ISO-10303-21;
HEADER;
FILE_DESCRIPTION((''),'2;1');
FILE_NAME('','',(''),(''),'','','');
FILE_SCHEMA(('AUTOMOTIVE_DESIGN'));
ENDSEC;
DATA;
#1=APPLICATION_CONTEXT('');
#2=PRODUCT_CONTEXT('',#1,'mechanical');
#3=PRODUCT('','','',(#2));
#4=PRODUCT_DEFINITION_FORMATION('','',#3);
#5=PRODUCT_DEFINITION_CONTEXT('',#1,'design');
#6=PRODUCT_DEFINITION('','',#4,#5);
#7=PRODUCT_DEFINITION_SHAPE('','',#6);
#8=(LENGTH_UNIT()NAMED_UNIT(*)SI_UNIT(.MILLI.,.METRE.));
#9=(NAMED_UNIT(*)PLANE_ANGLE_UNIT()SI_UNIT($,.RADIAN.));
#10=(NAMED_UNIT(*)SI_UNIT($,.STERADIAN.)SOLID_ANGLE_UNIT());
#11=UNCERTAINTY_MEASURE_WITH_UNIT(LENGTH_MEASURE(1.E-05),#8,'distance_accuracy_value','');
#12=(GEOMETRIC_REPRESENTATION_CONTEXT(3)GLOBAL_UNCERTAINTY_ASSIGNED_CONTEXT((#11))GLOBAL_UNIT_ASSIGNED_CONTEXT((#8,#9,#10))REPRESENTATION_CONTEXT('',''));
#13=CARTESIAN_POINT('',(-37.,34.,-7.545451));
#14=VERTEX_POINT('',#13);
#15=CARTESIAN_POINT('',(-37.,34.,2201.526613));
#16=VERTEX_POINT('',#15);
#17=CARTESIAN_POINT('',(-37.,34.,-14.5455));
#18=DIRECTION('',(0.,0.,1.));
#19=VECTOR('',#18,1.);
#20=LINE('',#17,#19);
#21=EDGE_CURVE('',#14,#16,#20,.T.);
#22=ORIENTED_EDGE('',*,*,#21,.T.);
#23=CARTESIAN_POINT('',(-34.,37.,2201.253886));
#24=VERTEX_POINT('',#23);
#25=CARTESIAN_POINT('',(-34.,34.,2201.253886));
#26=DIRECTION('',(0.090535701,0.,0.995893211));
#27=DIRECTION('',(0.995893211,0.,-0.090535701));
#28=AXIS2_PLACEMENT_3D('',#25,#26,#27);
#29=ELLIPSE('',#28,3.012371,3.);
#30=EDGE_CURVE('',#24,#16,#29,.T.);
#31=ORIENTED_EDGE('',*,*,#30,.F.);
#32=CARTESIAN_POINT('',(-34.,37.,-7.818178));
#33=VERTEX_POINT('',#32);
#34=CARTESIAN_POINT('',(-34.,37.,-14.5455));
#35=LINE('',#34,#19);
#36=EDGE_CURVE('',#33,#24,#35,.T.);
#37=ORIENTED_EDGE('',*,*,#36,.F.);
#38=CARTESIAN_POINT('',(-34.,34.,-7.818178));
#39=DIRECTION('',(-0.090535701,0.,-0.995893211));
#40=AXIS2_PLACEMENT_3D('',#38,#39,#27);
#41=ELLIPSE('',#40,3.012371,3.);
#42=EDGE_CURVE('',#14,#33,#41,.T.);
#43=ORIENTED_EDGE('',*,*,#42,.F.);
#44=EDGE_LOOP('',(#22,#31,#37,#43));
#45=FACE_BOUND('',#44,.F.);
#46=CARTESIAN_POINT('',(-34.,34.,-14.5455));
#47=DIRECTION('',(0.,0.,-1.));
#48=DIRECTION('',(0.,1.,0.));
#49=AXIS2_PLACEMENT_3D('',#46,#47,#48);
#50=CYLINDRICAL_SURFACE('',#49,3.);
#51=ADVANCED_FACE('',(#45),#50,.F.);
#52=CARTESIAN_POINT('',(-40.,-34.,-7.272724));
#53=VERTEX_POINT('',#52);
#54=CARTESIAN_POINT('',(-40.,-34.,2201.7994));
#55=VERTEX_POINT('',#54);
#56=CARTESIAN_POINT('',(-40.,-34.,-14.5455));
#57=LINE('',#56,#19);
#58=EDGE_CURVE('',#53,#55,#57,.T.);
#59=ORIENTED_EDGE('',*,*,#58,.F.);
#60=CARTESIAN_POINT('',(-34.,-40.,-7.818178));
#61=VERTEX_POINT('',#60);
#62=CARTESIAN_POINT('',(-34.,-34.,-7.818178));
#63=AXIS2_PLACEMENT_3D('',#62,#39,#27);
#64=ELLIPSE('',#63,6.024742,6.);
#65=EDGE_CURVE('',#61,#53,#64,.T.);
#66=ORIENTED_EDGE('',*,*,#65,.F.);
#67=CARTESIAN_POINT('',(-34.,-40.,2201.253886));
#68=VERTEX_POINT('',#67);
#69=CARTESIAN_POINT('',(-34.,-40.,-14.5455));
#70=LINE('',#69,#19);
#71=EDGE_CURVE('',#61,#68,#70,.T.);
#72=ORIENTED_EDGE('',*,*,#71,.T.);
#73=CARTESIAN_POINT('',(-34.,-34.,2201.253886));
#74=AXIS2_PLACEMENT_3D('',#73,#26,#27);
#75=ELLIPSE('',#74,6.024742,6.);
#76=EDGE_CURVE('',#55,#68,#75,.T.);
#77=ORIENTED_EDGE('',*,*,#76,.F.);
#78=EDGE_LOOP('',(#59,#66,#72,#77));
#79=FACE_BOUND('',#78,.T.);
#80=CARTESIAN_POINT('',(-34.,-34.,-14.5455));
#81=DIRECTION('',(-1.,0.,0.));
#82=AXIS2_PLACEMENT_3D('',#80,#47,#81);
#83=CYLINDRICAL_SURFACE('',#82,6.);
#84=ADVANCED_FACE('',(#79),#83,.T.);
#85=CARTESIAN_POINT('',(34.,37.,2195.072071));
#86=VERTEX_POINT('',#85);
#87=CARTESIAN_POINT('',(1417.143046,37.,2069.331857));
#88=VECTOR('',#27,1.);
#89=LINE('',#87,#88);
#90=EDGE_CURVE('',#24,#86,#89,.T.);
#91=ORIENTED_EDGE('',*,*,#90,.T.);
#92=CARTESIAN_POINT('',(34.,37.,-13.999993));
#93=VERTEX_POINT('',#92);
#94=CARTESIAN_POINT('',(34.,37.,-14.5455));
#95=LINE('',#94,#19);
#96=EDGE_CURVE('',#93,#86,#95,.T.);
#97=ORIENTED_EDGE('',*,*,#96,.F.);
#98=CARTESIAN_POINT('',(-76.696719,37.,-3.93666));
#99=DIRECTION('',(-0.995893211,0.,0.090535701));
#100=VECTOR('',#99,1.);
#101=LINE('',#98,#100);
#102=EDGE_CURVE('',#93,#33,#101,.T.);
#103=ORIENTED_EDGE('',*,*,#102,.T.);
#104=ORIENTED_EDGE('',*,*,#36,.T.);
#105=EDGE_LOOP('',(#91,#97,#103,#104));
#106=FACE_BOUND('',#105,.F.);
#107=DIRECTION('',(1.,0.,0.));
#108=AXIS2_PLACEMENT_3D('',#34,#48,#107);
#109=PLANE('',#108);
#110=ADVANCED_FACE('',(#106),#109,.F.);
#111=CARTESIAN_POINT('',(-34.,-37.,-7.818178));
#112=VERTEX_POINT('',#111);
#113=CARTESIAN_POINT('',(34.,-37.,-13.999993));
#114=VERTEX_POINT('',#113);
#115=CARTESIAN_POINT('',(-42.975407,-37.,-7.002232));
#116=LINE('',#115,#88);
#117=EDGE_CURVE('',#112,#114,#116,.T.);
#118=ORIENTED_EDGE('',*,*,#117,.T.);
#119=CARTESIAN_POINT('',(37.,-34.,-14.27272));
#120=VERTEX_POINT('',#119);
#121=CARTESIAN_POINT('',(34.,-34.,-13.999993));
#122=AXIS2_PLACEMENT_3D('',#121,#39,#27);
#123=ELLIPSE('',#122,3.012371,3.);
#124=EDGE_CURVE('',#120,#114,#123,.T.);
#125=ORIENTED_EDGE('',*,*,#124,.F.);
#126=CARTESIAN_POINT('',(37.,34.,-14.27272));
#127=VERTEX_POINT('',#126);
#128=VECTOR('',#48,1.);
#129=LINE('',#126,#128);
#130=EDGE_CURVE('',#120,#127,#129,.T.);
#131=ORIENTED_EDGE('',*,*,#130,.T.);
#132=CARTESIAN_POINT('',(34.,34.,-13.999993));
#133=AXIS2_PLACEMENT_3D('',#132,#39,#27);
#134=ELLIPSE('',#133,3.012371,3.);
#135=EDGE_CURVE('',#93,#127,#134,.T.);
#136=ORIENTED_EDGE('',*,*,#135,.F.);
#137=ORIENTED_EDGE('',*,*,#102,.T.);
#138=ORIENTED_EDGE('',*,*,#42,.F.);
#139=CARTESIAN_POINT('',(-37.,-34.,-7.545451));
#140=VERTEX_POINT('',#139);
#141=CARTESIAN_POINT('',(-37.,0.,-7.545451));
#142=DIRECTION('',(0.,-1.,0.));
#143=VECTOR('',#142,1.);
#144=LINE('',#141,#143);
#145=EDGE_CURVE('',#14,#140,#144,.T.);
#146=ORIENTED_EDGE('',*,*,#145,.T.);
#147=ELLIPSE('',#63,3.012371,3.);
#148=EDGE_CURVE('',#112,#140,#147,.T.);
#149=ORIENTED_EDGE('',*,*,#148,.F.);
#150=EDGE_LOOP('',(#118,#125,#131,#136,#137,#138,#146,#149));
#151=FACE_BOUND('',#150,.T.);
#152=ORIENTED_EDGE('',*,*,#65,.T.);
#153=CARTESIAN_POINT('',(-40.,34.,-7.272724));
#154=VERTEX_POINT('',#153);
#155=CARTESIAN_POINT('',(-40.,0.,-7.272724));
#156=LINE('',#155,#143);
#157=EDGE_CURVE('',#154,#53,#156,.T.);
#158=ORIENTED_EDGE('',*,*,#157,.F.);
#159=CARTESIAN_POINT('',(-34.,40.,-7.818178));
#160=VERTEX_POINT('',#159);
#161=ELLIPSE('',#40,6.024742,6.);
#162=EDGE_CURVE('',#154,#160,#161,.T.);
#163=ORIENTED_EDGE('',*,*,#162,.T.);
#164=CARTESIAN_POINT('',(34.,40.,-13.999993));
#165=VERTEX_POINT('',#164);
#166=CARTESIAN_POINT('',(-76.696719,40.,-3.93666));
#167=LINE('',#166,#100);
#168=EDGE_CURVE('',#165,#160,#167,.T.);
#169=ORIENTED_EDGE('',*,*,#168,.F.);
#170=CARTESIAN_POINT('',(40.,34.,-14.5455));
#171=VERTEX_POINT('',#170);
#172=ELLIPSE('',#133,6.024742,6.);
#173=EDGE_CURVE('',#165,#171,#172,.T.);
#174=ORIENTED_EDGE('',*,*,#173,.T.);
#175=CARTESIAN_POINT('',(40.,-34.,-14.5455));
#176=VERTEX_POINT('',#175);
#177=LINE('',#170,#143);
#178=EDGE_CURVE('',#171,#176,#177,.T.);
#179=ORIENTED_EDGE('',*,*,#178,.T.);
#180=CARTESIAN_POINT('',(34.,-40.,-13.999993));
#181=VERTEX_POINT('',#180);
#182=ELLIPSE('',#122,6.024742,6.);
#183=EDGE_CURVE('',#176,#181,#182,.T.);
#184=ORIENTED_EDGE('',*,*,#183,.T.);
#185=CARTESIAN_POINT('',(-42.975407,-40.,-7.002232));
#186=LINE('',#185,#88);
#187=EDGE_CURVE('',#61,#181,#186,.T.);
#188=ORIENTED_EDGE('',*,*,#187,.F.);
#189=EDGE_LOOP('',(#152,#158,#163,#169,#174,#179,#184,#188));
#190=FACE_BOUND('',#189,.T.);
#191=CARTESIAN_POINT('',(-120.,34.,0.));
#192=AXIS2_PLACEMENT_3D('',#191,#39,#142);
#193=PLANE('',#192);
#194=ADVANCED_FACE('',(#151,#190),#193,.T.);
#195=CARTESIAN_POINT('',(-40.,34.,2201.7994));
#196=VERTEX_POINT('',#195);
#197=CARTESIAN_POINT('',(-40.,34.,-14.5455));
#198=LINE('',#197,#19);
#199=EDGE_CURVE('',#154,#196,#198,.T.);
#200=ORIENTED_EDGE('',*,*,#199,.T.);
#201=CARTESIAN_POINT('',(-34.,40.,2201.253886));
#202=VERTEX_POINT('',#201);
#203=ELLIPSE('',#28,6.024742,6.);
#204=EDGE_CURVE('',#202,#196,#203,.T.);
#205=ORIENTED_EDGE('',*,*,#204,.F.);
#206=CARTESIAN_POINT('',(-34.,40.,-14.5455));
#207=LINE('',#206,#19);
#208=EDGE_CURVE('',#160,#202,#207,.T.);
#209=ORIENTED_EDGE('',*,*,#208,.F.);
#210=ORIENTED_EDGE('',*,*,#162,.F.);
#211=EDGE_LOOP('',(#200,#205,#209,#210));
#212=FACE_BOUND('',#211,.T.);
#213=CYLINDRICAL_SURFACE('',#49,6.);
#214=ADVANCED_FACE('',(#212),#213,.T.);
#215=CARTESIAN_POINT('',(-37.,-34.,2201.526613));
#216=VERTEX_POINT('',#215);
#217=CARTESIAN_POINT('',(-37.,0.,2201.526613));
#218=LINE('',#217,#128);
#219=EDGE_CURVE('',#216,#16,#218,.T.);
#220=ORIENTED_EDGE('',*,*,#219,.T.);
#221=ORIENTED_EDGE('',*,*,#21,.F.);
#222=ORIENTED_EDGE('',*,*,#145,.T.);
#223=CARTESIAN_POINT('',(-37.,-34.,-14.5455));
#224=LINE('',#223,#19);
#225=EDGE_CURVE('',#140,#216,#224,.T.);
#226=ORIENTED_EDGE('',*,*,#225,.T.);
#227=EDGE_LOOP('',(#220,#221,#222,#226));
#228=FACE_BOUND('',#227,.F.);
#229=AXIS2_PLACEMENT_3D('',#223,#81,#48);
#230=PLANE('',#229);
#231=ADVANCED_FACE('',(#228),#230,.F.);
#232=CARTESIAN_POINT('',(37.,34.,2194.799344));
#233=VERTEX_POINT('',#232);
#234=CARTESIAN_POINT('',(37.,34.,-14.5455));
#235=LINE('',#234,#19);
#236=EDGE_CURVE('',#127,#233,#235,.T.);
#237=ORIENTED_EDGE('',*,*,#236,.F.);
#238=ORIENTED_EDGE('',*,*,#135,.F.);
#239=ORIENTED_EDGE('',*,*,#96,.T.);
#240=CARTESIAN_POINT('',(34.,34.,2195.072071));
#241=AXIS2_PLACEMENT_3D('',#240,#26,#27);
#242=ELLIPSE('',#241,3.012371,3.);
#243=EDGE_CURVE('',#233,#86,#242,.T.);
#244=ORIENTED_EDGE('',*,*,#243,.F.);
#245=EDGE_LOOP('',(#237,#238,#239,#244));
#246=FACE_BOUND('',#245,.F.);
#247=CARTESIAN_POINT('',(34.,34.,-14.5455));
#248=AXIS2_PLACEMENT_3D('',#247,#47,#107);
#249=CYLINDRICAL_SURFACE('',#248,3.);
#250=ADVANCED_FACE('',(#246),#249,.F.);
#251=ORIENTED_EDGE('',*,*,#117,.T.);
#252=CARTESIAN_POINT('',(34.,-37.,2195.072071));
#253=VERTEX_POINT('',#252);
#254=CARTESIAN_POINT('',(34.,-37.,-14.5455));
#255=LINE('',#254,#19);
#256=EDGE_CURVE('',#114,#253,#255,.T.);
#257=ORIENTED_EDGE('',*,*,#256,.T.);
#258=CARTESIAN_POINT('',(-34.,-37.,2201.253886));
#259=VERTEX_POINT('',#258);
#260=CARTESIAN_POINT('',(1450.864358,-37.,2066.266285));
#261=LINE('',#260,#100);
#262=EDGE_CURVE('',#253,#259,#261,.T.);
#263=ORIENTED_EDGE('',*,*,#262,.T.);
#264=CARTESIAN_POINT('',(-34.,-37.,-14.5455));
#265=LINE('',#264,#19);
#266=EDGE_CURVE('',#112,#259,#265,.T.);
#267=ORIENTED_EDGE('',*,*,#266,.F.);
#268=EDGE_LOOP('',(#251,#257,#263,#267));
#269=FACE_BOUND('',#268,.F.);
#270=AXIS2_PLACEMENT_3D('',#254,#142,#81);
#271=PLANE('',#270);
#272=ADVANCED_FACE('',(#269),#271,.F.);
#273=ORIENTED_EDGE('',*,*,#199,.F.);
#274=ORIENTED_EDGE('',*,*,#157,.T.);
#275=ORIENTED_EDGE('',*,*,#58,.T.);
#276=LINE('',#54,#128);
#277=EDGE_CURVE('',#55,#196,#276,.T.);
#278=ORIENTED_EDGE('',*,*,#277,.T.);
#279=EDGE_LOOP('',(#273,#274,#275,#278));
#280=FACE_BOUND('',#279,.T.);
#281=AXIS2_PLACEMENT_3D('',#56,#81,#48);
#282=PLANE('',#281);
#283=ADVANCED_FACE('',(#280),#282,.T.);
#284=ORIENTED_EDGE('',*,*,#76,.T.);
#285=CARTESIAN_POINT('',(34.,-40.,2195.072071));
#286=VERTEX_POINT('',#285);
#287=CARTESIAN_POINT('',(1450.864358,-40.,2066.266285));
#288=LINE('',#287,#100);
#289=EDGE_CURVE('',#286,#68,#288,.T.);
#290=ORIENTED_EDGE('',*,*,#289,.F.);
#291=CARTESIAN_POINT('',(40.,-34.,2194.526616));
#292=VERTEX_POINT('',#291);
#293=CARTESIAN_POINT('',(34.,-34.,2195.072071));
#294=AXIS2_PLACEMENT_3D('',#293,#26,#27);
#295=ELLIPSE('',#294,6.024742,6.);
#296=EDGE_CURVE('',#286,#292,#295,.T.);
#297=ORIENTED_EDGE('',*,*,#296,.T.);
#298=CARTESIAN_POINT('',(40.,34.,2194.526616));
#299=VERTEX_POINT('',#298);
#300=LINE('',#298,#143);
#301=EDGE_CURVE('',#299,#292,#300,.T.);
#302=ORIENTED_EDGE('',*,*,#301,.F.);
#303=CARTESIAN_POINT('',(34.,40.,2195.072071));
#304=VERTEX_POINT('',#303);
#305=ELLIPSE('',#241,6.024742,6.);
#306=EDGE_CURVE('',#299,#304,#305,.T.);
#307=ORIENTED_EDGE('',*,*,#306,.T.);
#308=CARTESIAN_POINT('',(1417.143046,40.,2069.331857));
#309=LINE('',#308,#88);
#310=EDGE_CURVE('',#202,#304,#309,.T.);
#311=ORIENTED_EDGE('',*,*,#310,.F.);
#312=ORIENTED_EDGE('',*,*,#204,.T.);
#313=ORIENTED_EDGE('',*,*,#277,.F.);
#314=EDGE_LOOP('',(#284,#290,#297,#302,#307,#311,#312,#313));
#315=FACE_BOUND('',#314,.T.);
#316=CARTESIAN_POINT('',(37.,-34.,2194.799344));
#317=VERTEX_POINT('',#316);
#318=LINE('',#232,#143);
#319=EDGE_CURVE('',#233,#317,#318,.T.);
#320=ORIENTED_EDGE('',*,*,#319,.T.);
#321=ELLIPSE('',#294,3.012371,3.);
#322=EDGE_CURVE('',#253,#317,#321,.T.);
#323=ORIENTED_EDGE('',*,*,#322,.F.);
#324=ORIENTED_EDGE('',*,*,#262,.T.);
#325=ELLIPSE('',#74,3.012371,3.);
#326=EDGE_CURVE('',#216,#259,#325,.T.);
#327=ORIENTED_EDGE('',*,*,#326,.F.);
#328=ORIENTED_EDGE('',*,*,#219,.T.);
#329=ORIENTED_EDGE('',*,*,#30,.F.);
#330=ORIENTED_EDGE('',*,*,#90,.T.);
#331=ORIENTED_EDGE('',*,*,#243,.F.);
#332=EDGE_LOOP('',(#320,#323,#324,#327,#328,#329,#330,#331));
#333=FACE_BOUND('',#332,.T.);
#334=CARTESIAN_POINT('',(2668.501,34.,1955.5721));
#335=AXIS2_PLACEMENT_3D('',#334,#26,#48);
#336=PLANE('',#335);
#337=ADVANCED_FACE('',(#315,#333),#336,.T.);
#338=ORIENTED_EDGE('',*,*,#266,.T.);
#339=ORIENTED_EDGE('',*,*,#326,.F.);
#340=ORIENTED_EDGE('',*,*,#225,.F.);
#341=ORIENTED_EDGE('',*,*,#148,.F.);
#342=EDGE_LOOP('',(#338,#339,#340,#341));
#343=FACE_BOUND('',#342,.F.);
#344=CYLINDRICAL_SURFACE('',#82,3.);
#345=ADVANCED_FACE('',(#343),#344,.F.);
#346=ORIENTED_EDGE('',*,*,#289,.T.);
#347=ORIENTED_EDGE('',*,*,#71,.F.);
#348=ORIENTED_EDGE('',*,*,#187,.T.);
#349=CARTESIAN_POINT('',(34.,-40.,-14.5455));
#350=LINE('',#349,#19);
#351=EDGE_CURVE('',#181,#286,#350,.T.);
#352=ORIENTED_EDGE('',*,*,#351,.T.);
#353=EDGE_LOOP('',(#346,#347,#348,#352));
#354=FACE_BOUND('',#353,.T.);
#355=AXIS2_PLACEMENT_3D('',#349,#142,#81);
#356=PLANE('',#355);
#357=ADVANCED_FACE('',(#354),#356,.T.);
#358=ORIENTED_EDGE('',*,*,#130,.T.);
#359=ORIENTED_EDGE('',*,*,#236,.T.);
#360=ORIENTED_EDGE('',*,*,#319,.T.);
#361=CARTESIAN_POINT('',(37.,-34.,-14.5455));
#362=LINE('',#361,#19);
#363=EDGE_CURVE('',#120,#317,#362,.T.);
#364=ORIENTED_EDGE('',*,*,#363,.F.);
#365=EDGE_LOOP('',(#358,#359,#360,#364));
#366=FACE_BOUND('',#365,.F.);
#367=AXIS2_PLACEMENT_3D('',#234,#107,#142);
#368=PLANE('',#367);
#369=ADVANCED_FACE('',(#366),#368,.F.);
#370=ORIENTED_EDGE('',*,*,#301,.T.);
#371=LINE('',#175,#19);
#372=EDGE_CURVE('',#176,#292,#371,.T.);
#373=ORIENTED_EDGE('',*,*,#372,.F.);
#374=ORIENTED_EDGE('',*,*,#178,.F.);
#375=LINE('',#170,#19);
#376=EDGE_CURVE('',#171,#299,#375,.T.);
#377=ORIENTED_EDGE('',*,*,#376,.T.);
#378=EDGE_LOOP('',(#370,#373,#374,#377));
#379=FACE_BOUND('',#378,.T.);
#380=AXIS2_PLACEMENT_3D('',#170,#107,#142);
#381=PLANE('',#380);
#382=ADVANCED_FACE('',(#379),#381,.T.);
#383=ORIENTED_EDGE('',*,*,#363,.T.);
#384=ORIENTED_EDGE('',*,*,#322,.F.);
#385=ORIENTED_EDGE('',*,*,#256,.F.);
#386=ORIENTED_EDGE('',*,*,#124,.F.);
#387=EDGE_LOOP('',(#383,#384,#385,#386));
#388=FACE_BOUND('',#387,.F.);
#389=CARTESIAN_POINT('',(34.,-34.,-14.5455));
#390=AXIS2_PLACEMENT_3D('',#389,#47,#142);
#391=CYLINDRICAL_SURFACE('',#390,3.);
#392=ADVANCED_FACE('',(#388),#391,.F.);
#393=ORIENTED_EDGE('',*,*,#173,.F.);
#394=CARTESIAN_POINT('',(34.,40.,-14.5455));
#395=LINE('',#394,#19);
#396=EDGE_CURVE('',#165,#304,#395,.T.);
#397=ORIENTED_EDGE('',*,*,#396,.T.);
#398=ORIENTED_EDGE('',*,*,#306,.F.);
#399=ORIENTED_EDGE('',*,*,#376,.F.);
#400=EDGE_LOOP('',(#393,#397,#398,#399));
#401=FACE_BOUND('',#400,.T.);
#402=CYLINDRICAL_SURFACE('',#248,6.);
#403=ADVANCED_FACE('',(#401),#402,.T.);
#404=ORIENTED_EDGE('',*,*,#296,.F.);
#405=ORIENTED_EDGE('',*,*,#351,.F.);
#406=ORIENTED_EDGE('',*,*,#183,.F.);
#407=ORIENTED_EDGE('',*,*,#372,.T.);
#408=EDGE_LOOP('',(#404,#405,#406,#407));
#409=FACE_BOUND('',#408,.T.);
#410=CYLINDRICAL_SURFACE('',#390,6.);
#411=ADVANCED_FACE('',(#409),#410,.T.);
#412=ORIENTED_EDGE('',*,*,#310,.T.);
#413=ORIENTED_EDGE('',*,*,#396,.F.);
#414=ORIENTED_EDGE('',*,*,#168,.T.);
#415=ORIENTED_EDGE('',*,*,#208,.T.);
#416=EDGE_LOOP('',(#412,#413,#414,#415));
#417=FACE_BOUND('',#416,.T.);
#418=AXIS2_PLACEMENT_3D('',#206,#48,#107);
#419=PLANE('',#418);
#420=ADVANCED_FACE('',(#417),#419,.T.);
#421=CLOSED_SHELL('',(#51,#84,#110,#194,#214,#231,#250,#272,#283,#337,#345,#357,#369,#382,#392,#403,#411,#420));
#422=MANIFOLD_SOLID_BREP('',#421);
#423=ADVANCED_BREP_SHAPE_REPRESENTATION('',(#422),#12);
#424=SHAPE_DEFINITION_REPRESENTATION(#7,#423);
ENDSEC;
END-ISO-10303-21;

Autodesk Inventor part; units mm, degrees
ref_plane "Start Plane" through (0, 0, -14.5455) normal (0, 0, 1) x (1, 0, 0)
ref_plane "End Plane" through (0, 0, 2201.7995) normal (0, 0, 1) x (1, 0, 0)
sketch "Sketch" plane through (0, 0, 0) normal (0, 0, 1) x (1, 0, 0)
  line L0 (-40, -34) -> (-40, 34)
  line L1 (-34, 40) -> (34, 40)
  line L2 (40, 34) -> (40, -34)
  line L3 (34, -40) -> (-34, -40)
  arc A0 (-40, -34) -> (-34, -40) centre (-34, -34) ccw
  arc A1 (40, 34) -> (34, 40) centre (34, 34) ccw
  arc A2 (-34, 40) -> (-40, 34) centre (-34, 34) ccw
  arc A3 (34, -40) -> (40, -34) centre (34, -34) ccw
  arc A4 (-34, 37) -> (-37, 34) centre (-34, 34) ccw
  line L4 (-34, 37) -> (34, 37)
  arc A5 (37, 34) -> (34, 37) centre (34, 34) ccw
  line L5 (37, 34) -> (37, -34)
  arc A6 (34, -37) -> (37, -34) centre (34, -34) ccw
  line L6 (34, -37) -> (-34, -37)
  arc A7 (-37, -34) -> (-34, -37) centre (-34, -34) ccw
  line L7 (-37, -34) -> (-37, 34)
  line L8 (0, 57.7397) -> (0, -57.7397) construction
  line L9 (-57.7397, 0) -> (57.7397, 0) construction
  dimension "d7" = 6
  dimension "d9" = 80
  dimension "d11" = 80
  dimension "d12" = 3
  dimension "d15" = 40
  dimension "d16" = 40
extrude "Body" add sketch "Sketch" along normal up to surface (2216.3449 mm away) from surface at -14.5455
sketch "Sketch3" plane through (0, 0, 0) normal (0, 0, 1) x (1, 0, 0)
  line L0 (0, 0) -> (10, 0)
ref_plane "Work Plane3" through (0, 0, 0) normal (0, -1, 0) x (1, 0, 0)
ref_plane "Work Plane4" through (2668.501, 34, 1955.5721) normal (0.0905357, 0, 0.9958932) x (0.9958932, 0, -0.0905357)
split "Split1" plane through (2668.501, 34, 1955.5721) removes the side toward (0.0905357, 0, 0.9958932)
ref_plane "Work Plane5" through (-120, 34, 0) normal (-0.0905357, 0, -0.9958932) x (-0.9958932, 0, 0.0905357)
split "Split2" plane through (-120, 34, 0) removes the side toward (-0.0905357, 0, -0.9958932)
sketch "Sketch4" plane through (0, 0, 0) normal (0, -1, 0) x (1, 0, 0)
  line L0 (-2, -14.5455) -> (12, -14.5455) projected
  line L1 (-2, 2201.7995) -> (12, 2201.7995) projected
  dimension "d18" = 2216.3449
equation "\"d7\" = G_IR"
equation "\"d9\" = G_W"
equation "\"d11\" = G_H"
equation "\"d12\" = G_T"
equation "\"d15\" = 0.5 * d9"
equation "\"d16\" = 0.5 * d11"
equation "\"d3\" = G_L"
equation "\"G_W\" = 80"
equation "\"G_H\" = 80"
equation "\"G_T\" = 3"
equation "\"G_IR\" = 6"
equation "\"G_L\" = d18"
equation "\"G_OFFSET_START\" = 14.54545"
equation "\"G_OFFSET_END\" = -7.27273"
equation "\"d13\" = -G_OFFSET_START"
equation "\"d14\" = G_OFFSET_END + B_L"
equation "\"B_L\" = 2209.0722"
properties part number "ISO 10799-2 - 80x80x3 - 2216,34" material "Steel, Mild"
